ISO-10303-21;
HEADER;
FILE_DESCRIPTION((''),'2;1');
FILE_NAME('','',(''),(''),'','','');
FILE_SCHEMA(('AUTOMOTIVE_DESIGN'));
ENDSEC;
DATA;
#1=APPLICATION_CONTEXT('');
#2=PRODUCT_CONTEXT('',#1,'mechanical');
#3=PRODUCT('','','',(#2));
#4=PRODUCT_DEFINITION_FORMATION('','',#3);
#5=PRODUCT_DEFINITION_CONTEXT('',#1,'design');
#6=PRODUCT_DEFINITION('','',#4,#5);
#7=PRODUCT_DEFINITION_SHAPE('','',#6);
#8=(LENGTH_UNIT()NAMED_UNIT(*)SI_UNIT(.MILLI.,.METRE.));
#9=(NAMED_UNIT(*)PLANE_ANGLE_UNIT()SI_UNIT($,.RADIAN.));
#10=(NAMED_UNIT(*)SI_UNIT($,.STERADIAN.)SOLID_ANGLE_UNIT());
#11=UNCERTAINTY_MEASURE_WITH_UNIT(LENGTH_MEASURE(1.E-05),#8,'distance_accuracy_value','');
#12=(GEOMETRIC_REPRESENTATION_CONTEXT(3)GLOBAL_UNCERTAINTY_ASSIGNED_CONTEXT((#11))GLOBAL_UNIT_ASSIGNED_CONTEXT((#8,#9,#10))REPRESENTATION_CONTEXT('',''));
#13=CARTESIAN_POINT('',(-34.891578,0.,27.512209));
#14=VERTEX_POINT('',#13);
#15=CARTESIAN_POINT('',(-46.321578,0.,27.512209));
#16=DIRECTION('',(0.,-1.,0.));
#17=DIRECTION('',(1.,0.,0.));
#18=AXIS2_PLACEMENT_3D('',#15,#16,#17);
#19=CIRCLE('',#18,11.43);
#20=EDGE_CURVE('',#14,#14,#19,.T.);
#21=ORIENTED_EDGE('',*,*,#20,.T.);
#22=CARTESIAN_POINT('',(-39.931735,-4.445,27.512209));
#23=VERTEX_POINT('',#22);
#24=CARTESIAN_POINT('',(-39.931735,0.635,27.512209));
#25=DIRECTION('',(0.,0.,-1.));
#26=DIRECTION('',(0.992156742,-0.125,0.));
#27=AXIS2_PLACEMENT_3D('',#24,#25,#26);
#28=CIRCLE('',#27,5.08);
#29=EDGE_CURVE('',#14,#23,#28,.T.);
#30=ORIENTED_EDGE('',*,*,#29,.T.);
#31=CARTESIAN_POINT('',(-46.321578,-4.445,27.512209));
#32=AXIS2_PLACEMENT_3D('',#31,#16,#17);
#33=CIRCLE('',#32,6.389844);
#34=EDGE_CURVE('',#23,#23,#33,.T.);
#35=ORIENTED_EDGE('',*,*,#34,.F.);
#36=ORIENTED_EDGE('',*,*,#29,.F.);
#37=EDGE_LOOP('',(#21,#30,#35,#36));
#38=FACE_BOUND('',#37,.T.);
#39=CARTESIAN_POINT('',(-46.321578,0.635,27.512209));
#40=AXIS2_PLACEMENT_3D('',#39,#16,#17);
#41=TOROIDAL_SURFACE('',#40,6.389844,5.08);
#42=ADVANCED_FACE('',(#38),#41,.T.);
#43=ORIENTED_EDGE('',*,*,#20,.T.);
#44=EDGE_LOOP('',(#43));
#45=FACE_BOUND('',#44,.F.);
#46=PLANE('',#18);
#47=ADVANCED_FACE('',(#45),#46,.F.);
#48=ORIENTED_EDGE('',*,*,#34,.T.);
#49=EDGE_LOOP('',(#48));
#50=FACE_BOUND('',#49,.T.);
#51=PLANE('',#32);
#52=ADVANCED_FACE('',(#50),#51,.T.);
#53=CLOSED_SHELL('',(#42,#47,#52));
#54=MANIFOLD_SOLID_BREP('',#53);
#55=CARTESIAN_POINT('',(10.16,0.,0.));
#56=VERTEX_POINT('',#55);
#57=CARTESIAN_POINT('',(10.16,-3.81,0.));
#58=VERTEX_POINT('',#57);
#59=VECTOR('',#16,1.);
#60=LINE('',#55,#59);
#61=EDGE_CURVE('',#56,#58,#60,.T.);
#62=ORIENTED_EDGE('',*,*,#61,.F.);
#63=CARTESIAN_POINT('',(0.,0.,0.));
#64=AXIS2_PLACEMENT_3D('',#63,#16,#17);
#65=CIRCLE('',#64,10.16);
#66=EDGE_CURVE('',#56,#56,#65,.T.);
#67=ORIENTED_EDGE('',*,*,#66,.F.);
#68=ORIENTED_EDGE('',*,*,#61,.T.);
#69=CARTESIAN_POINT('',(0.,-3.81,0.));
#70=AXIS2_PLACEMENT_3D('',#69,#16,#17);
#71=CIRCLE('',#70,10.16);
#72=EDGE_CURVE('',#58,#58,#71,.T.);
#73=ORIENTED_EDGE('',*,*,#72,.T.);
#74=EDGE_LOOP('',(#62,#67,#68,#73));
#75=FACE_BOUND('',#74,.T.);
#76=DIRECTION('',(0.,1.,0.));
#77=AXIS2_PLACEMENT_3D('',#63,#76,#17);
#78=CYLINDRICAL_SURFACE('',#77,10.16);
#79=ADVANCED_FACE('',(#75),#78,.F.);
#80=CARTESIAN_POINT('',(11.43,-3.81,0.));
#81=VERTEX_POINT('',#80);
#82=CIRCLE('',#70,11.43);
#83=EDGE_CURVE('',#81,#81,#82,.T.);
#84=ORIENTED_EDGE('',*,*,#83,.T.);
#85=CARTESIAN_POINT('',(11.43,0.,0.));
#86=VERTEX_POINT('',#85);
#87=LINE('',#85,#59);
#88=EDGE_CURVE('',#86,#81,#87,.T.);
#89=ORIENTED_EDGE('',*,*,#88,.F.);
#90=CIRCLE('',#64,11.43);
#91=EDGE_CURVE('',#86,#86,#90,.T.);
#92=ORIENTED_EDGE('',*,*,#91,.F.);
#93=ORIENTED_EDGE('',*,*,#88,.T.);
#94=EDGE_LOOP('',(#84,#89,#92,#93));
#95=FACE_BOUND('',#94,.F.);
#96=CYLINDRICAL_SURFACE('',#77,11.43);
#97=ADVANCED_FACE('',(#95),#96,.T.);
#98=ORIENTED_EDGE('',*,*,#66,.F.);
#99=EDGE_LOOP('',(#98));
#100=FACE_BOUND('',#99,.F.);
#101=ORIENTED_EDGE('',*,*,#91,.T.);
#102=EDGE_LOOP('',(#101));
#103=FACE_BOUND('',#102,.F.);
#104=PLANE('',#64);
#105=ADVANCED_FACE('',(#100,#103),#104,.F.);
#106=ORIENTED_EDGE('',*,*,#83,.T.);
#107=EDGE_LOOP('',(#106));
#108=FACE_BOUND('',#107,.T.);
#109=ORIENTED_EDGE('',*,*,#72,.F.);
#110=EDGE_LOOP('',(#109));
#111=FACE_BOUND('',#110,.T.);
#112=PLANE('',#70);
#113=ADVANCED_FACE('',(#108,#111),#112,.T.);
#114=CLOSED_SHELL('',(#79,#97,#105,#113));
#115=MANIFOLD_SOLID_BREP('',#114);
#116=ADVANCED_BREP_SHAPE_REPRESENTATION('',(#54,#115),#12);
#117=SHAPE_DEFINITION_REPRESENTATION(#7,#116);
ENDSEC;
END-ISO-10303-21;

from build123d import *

# Parameters (mm, degrees)
F0_R     = 11.43
F0_R_2   = 10.16
F1_DEPTH = 3.81
F2_R     = 11.43
F3_DEPTH = 4.445


# Not quite as in the source:
# - a fillet or chamfer that OpenCascade refuses, or shapes differently, is made with other operations: its cross-section is extruded or revolved along the edge and cut away or added


with BuildPart() as f1:
    # F0 (on Front) → F1 (new body)
    with BuildSketch(Plane.XZ):
        Circle(F0_R)
        Circle(F0_R_2, mode=Mode.SUBTRACT)
    extrude(amount=F1_DEPTH)


with BuildPart() as f3:
    # F2 (on Front) → F3 (new body)
    with BuildSketch(Plane.XZ):
        with Locations((-46.3215783238, 27.5122094899)):
            Circle(F2_R)
    extrude(amount=F3_DEPTH)

    # F4: fillet of radius 5.08 on 1 edges, made by hand

    # F4_s1 → F4_t2 (revolve, cut)
    with BuildSketch(Plane.XY.offset(27.5122094899)):
        with BuildLine():
            ThreePointArc((-34.8915783238, 0), (-36.5716304064, -3.175), (-39.9317345714, -4.445))
            Line((-39.9317345714, -4.445), (-34.8915783238, -4.445))
            Line((-34.8915783238, -4.445), (-34.8915783238, 0))
        make_face()
    revolve(axis=Axis((-46.3215783238, -4.445, 27.5122094899), (0, -1, 0)), mode=Mode.SUBTRACT)


solid = Compound([f1.part, f3.part])
